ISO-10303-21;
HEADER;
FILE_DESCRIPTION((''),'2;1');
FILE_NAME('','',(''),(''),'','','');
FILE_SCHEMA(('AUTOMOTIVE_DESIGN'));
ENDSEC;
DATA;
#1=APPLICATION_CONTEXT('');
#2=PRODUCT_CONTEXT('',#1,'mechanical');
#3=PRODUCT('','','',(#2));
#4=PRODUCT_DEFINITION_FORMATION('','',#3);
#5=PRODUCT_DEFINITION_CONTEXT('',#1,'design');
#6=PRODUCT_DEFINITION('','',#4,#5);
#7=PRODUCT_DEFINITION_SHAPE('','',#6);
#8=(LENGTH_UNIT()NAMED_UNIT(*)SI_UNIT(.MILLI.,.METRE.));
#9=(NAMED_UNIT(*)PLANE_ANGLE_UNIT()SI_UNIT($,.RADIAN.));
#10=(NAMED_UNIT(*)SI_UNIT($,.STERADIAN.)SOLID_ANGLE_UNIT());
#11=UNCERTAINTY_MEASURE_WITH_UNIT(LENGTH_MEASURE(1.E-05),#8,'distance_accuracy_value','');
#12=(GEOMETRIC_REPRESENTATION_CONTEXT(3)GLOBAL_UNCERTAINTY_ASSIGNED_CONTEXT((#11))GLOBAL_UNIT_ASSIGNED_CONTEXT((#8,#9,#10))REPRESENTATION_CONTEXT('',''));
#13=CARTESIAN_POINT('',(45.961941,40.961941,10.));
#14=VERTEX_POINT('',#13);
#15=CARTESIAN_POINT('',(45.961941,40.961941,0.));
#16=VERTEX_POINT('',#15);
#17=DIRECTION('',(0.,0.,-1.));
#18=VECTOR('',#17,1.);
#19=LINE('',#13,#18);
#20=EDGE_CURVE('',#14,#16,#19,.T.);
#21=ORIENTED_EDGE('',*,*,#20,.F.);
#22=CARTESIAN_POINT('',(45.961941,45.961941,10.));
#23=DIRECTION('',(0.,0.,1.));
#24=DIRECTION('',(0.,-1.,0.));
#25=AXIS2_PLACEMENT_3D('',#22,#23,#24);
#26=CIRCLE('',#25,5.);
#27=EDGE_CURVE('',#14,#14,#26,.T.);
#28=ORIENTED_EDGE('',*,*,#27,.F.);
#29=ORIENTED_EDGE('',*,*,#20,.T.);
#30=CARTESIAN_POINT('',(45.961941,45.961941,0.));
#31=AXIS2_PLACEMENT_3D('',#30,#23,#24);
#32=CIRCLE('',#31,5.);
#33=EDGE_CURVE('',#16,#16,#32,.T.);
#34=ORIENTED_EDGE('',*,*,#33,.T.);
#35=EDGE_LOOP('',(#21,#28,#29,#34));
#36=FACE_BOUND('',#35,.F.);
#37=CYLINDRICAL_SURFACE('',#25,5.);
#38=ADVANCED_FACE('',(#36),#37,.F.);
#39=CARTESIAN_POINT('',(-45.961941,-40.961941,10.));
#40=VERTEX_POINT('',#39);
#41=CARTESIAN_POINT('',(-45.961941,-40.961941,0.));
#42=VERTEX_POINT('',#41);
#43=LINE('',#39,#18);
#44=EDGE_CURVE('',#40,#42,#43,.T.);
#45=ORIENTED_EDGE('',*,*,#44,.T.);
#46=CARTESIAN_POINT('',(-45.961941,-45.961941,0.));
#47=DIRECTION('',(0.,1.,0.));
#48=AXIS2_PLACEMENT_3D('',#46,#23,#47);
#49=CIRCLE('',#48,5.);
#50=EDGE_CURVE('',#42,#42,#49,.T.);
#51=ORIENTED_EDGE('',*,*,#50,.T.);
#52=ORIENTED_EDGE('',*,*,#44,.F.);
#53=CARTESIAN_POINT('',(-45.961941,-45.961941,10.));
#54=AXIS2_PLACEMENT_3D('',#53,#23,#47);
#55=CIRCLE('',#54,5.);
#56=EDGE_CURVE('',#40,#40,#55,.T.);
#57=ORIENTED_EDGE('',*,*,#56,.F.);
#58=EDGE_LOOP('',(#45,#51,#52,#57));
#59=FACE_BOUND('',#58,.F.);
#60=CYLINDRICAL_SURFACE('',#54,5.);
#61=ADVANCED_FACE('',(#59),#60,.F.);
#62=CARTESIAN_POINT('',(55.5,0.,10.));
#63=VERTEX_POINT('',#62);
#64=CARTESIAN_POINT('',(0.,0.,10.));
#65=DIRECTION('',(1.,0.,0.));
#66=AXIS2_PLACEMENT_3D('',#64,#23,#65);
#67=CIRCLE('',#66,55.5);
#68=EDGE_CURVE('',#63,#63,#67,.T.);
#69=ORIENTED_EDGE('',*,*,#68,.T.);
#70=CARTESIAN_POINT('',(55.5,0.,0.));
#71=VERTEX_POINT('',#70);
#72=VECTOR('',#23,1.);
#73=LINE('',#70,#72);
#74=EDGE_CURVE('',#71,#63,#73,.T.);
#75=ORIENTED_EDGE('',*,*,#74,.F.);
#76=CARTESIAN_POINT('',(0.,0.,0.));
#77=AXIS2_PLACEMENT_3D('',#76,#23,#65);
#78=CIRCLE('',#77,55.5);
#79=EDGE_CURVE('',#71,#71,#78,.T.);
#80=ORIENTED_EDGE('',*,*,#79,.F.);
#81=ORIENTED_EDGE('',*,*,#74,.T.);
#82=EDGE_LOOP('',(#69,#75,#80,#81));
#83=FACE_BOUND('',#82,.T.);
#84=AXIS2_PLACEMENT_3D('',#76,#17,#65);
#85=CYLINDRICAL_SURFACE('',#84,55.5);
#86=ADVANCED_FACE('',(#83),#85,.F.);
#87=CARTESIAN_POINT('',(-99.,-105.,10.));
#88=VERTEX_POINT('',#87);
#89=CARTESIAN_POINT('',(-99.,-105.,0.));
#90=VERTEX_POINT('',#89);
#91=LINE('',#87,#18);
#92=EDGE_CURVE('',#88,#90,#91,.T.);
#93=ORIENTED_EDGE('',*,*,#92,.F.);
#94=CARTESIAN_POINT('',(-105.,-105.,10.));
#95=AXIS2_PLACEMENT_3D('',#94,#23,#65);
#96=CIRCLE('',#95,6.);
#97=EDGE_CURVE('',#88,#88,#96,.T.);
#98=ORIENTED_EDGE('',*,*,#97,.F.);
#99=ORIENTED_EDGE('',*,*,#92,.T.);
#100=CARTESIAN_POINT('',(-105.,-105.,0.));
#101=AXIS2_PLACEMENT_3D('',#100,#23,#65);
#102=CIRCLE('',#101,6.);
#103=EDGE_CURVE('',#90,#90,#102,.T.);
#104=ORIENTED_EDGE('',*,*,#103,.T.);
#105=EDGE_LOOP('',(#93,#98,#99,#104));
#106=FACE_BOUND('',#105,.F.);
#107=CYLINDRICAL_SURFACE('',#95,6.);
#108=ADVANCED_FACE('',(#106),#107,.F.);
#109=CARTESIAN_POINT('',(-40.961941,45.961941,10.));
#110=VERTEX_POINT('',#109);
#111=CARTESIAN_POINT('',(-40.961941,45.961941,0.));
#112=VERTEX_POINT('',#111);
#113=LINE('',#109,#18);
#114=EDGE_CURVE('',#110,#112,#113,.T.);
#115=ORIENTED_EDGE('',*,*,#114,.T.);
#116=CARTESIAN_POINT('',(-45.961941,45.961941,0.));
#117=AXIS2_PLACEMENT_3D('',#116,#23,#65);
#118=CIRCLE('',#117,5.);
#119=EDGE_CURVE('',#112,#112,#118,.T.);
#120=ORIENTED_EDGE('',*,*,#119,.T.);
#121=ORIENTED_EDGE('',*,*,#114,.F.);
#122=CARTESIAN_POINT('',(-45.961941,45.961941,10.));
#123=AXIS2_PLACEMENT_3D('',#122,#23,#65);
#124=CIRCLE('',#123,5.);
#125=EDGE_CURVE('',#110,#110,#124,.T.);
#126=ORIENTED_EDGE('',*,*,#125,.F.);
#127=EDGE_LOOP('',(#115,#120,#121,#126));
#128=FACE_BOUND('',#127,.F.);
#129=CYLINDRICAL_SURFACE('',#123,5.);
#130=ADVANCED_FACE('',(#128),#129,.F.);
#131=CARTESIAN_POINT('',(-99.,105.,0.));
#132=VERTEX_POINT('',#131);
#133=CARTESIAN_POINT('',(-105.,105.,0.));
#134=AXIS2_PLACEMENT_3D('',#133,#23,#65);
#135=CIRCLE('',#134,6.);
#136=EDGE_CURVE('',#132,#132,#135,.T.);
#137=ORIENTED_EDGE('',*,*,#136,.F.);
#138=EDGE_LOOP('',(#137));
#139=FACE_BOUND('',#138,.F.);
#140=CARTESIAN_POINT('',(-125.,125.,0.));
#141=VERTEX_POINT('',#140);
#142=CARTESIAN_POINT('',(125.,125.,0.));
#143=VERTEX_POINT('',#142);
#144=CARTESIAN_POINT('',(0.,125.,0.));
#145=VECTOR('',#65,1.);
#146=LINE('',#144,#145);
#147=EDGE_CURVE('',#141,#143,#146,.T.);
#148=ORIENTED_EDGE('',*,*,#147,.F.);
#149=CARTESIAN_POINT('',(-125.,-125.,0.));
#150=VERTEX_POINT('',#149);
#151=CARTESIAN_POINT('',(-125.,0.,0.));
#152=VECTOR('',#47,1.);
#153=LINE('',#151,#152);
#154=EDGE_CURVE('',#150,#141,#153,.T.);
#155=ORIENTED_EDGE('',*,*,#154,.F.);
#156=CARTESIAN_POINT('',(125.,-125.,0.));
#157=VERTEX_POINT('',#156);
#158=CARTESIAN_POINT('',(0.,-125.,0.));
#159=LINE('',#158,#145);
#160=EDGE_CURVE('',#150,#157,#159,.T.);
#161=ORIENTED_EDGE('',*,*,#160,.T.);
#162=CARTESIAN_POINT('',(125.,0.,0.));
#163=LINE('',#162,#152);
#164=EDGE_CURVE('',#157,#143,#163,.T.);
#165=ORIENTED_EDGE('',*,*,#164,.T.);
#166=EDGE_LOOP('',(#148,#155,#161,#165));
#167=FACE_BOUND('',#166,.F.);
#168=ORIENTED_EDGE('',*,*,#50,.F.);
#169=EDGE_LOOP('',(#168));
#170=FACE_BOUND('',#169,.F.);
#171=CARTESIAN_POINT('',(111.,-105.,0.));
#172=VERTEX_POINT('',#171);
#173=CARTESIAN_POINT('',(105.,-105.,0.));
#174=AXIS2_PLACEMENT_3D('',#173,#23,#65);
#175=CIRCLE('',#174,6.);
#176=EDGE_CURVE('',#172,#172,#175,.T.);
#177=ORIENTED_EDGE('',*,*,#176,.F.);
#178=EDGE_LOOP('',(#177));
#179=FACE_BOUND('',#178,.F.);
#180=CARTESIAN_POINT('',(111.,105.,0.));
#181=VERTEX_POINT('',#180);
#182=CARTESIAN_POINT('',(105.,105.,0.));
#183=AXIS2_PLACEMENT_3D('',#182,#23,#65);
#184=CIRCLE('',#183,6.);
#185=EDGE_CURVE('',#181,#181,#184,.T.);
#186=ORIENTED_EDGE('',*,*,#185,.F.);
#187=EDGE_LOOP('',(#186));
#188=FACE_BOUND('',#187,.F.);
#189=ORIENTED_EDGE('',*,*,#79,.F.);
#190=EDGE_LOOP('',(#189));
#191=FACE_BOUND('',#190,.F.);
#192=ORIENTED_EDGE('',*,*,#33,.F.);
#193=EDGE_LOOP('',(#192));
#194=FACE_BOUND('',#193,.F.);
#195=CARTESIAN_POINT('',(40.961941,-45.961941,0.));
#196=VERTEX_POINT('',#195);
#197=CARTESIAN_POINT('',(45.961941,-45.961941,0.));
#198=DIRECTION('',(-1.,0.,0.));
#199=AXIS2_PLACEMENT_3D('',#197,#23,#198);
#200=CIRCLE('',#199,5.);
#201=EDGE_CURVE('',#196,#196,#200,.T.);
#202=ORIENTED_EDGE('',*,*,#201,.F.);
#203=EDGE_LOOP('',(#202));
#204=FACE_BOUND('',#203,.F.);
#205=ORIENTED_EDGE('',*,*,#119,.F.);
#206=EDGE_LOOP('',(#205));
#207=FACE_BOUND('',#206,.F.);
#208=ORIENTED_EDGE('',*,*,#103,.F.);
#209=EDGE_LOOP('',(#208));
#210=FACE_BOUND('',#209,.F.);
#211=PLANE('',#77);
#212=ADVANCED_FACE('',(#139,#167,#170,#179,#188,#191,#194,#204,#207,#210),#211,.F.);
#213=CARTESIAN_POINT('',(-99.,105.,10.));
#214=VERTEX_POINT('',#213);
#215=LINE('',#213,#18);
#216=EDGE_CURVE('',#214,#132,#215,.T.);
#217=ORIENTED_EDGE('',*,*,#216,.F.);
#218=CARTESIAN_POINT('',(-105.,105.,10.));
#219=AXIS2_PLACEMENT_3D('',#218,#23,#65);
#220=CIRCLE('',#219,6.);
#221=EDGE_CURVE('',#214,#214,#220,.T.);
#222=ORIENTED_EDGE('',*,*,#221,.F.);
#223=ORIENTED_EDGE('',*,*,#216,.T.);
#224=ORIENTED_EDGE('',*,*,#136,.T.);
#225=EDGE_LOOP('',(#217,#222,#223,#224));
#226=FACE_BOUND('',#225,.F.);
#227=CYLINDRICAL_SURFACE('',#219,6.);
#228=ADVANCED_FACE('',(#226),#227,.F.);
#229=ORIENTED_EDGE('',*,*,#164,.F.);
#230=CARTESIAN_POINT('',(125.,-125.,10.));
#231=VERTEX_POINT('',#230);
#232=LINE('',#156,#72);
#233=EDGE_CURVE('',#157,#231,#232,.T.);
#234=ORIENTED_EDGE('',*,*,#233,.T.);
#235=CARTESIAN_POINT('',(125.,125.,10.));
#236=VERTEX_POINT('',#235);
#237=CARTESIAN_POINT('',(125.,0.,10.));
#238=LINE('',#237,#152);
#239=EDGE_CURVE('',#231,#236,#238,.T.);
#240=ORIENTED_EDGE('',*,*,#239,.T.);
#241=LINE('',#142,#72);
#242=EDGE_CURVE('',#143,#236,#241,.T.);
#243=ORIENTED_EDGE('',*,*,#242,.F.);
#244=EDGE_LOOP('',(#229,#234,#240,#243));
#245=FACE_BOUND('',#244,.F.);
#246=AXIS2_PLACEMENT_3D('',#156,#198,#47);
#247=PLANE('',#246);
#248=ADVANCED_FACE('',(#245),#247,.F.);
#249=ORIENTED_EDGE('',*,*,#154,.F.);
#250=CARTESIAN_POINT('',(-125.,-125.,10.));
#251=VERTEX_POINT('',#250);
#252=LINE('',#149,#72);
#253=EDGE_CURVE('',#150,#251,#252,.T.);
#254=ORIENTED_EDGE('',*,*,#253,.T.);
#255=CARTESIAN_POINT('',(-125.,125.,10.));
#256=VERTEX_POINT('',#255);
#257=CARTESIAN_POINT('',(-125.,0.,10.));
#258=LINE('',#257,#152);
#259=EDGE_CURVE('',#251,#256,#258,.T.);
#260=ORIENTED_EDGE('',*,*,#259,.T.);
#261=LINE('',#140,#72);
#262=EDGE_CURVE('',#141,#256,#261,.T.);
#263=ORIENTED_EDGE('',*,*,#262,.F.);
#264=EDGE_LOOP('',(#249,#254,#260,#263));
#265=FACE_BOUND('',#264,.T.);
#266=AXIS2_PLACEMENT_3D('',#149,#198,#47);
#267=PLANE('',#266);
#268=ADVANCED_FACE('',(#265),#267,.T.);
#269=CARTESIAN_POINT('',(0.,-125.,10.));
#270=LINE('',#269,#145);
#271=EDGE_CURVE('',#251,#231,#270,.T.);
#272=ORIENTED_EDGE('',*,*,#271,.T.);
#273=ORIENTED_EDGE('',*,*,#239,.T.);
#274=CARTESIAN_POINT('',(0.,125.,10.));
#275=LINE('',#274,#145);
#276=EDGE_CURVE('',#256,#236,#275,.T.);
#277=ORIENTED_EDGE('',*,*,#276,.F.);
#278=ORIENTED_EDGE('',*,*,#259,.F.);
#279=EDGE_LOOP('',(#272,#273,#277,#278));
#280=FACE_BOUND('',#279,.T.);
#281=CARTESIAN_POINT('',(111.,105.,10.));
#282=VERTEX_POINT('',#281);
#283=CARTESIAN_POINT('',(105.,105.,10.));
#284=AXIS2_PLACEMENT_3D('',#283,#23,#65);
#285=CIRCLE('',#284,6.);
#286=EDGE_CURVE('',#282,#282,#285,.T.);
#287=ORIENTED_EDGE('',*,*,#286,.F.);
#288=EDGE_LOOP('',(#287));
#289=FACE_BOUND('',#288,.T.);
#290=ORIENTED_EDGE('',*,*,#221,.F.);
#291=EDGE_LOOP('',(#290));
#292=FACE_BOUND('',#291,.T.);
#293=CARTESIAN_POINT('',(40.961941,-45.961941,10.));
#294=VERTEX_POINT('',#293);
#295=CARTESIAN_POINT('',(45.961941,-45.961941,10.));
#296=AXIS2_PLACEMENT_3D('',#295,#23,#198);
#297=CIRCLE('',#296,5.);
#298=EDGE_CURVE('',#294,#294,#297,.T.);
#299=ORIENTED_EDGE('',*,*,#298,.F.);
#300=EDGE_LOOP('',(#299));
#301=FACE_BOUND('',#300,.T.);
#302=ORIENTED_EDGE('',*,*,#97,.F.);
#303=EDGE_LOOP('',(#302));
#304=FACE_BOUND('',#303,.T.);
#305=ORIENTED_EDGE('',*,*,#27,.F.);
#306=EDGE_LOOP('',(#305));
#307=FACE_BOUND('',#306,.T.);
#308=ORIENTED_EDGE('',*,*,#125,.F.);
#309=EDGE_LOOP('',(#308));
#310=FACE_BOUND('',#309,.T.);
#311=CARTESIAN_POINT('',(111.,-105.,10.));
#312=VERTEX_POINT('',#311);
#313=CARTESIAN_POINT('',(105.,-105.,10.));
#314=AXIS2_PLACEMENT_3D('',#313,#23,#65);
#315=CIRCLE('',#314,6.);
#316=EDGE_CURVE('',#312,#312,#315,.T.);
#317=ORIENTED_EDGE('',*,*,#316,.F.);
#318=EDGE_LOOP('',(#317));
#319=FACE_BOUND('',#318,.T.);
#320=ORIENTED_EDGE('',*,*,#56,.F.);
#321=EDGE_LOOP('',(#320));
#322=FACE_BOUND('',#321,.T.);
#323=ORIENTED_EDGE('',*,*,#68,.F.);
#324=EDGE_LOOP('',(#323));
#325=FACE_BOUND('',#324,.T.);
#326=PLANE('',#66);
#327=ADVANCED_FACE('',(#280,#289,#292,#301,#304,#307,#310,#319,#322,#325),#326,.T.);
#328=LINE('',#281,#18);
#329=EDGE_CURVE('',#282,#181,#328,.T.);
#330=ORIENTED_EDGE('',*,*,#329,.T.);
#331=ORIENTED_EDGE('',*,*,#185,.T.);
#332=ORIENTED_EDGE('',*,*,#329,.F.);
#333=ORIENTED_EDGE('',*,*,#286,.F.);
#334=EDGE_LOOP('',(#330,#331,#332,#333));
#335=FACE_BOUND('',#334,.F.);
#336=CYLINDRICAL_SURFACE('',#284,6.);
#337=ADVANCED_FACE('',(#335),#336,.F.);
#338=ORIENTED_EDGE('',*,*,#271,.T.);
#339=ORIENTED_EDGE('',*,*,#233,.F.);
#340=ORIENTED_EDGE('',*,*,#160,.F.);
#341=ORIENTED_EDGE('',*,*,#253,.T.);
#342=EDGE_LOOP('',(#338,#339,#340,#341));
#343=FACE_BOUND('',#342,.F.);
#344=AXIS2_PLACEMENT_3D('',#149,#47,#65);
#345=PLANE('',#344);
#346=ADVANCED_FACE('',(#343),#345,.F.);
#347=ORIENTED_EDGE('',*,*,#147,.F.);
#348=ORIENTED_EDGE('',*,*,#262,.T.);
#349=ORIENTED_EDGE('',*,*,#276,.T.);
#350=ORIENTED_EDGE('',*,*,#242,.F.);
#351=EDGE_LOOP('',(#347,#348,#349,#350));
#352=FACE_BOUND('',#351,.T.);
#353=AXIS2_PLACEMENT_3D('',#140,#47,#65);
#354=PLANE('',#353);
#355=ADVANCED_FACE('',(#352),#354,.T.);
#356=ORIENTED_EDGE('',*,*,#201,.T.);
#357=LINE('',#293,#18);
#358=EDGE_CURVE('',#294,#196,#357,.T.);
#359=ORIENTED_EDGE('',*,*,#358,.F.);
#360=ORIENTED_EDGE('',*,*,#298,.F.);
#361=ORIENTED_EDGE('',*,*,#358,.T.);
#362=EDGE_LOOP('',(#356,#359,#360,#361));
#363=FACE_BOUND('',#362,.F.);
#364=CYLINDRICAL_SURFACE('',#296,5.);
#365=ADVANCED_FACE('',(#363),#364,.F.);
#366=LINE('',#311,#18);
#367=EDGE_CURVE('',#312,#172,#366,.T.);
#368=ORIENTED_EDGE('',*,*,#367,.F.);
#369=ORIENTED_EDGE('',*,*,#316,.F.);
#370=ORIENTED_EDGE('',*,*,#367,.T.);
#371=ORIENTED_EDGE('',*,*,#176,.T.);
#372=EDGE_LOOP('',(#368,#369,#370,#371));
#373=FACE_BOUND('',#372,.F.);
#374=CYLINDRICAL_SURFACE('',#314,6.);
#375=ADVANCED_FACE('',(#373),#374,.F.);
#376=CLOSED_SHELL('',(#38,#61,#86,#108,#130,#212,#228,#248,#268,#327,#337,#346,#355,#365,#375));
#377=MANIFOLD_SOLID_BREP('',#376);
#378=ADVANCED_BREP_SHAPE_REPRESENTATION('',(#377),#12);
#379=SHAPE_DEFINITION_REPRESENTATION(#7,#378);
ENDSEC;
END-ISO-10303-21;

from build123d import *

# Parameters (mm, degrees)
F0_W            = 250
F0_H            = 250
F0_R            = 55.5
F1_DEPTH        = 10
F2_R            = 5
F3_DEPTH        = 25
F3_COPIES_COUNT = 4
F4_R            = 6
F5_DEPTH        = 10.001


# Not quite as in the source:
# - a pattern or mirror of a feature is missing from the dataset's text; its kind, count and spacing are read off the source's solid


with BuildPart() as f1:
    # F0 (on Top) → F1 (new body)
    with BuildSketch(Plane.XY):
        Rectangle(F0_W, F0_H)
        Circle(F0_R, mode=Mode.SUBTRACT)
    extrude(amount=F1_DEPTH)

    # F2 (on face) → F3 (cut)
    with BuildSketch(Plane.XY.offset(10)):
        with Locations((-45.9619407771, 45.9619407771)):
            Circle(F2_R)
    f3 = extrude(amount=-F3_DEPTH, mode=Mode.SUBTRACT)

    # F3_copies: F3 ×4 about axis
    f3_copies_axis = Axis((0, 0, 0), (0, 0, 1))
    for i in range(1, F3_COPIES_COUNT):
        add(f3.rotate(f3_copies_axis, i * 360 / F3_COPIES_COUNT), mode=Mode.SUBTRACT)

    # F4 (on face) → F5 (cut, through all)
    with BuildSketch(Plane.XY.offset(10)):
        with Locations((-105, 105)):
            Circle(F4_R)
        with Locations((105, 105)):
            Circle(F4_R)
        with Locations((105, -105)):
            Circle(F4_R)
        with Locations((-105, -105)):
            Circle(F4_R)
    extrude(amount=-F5_DEPTH, mode=Mode.SUBTRACT)


solid = f1.part
